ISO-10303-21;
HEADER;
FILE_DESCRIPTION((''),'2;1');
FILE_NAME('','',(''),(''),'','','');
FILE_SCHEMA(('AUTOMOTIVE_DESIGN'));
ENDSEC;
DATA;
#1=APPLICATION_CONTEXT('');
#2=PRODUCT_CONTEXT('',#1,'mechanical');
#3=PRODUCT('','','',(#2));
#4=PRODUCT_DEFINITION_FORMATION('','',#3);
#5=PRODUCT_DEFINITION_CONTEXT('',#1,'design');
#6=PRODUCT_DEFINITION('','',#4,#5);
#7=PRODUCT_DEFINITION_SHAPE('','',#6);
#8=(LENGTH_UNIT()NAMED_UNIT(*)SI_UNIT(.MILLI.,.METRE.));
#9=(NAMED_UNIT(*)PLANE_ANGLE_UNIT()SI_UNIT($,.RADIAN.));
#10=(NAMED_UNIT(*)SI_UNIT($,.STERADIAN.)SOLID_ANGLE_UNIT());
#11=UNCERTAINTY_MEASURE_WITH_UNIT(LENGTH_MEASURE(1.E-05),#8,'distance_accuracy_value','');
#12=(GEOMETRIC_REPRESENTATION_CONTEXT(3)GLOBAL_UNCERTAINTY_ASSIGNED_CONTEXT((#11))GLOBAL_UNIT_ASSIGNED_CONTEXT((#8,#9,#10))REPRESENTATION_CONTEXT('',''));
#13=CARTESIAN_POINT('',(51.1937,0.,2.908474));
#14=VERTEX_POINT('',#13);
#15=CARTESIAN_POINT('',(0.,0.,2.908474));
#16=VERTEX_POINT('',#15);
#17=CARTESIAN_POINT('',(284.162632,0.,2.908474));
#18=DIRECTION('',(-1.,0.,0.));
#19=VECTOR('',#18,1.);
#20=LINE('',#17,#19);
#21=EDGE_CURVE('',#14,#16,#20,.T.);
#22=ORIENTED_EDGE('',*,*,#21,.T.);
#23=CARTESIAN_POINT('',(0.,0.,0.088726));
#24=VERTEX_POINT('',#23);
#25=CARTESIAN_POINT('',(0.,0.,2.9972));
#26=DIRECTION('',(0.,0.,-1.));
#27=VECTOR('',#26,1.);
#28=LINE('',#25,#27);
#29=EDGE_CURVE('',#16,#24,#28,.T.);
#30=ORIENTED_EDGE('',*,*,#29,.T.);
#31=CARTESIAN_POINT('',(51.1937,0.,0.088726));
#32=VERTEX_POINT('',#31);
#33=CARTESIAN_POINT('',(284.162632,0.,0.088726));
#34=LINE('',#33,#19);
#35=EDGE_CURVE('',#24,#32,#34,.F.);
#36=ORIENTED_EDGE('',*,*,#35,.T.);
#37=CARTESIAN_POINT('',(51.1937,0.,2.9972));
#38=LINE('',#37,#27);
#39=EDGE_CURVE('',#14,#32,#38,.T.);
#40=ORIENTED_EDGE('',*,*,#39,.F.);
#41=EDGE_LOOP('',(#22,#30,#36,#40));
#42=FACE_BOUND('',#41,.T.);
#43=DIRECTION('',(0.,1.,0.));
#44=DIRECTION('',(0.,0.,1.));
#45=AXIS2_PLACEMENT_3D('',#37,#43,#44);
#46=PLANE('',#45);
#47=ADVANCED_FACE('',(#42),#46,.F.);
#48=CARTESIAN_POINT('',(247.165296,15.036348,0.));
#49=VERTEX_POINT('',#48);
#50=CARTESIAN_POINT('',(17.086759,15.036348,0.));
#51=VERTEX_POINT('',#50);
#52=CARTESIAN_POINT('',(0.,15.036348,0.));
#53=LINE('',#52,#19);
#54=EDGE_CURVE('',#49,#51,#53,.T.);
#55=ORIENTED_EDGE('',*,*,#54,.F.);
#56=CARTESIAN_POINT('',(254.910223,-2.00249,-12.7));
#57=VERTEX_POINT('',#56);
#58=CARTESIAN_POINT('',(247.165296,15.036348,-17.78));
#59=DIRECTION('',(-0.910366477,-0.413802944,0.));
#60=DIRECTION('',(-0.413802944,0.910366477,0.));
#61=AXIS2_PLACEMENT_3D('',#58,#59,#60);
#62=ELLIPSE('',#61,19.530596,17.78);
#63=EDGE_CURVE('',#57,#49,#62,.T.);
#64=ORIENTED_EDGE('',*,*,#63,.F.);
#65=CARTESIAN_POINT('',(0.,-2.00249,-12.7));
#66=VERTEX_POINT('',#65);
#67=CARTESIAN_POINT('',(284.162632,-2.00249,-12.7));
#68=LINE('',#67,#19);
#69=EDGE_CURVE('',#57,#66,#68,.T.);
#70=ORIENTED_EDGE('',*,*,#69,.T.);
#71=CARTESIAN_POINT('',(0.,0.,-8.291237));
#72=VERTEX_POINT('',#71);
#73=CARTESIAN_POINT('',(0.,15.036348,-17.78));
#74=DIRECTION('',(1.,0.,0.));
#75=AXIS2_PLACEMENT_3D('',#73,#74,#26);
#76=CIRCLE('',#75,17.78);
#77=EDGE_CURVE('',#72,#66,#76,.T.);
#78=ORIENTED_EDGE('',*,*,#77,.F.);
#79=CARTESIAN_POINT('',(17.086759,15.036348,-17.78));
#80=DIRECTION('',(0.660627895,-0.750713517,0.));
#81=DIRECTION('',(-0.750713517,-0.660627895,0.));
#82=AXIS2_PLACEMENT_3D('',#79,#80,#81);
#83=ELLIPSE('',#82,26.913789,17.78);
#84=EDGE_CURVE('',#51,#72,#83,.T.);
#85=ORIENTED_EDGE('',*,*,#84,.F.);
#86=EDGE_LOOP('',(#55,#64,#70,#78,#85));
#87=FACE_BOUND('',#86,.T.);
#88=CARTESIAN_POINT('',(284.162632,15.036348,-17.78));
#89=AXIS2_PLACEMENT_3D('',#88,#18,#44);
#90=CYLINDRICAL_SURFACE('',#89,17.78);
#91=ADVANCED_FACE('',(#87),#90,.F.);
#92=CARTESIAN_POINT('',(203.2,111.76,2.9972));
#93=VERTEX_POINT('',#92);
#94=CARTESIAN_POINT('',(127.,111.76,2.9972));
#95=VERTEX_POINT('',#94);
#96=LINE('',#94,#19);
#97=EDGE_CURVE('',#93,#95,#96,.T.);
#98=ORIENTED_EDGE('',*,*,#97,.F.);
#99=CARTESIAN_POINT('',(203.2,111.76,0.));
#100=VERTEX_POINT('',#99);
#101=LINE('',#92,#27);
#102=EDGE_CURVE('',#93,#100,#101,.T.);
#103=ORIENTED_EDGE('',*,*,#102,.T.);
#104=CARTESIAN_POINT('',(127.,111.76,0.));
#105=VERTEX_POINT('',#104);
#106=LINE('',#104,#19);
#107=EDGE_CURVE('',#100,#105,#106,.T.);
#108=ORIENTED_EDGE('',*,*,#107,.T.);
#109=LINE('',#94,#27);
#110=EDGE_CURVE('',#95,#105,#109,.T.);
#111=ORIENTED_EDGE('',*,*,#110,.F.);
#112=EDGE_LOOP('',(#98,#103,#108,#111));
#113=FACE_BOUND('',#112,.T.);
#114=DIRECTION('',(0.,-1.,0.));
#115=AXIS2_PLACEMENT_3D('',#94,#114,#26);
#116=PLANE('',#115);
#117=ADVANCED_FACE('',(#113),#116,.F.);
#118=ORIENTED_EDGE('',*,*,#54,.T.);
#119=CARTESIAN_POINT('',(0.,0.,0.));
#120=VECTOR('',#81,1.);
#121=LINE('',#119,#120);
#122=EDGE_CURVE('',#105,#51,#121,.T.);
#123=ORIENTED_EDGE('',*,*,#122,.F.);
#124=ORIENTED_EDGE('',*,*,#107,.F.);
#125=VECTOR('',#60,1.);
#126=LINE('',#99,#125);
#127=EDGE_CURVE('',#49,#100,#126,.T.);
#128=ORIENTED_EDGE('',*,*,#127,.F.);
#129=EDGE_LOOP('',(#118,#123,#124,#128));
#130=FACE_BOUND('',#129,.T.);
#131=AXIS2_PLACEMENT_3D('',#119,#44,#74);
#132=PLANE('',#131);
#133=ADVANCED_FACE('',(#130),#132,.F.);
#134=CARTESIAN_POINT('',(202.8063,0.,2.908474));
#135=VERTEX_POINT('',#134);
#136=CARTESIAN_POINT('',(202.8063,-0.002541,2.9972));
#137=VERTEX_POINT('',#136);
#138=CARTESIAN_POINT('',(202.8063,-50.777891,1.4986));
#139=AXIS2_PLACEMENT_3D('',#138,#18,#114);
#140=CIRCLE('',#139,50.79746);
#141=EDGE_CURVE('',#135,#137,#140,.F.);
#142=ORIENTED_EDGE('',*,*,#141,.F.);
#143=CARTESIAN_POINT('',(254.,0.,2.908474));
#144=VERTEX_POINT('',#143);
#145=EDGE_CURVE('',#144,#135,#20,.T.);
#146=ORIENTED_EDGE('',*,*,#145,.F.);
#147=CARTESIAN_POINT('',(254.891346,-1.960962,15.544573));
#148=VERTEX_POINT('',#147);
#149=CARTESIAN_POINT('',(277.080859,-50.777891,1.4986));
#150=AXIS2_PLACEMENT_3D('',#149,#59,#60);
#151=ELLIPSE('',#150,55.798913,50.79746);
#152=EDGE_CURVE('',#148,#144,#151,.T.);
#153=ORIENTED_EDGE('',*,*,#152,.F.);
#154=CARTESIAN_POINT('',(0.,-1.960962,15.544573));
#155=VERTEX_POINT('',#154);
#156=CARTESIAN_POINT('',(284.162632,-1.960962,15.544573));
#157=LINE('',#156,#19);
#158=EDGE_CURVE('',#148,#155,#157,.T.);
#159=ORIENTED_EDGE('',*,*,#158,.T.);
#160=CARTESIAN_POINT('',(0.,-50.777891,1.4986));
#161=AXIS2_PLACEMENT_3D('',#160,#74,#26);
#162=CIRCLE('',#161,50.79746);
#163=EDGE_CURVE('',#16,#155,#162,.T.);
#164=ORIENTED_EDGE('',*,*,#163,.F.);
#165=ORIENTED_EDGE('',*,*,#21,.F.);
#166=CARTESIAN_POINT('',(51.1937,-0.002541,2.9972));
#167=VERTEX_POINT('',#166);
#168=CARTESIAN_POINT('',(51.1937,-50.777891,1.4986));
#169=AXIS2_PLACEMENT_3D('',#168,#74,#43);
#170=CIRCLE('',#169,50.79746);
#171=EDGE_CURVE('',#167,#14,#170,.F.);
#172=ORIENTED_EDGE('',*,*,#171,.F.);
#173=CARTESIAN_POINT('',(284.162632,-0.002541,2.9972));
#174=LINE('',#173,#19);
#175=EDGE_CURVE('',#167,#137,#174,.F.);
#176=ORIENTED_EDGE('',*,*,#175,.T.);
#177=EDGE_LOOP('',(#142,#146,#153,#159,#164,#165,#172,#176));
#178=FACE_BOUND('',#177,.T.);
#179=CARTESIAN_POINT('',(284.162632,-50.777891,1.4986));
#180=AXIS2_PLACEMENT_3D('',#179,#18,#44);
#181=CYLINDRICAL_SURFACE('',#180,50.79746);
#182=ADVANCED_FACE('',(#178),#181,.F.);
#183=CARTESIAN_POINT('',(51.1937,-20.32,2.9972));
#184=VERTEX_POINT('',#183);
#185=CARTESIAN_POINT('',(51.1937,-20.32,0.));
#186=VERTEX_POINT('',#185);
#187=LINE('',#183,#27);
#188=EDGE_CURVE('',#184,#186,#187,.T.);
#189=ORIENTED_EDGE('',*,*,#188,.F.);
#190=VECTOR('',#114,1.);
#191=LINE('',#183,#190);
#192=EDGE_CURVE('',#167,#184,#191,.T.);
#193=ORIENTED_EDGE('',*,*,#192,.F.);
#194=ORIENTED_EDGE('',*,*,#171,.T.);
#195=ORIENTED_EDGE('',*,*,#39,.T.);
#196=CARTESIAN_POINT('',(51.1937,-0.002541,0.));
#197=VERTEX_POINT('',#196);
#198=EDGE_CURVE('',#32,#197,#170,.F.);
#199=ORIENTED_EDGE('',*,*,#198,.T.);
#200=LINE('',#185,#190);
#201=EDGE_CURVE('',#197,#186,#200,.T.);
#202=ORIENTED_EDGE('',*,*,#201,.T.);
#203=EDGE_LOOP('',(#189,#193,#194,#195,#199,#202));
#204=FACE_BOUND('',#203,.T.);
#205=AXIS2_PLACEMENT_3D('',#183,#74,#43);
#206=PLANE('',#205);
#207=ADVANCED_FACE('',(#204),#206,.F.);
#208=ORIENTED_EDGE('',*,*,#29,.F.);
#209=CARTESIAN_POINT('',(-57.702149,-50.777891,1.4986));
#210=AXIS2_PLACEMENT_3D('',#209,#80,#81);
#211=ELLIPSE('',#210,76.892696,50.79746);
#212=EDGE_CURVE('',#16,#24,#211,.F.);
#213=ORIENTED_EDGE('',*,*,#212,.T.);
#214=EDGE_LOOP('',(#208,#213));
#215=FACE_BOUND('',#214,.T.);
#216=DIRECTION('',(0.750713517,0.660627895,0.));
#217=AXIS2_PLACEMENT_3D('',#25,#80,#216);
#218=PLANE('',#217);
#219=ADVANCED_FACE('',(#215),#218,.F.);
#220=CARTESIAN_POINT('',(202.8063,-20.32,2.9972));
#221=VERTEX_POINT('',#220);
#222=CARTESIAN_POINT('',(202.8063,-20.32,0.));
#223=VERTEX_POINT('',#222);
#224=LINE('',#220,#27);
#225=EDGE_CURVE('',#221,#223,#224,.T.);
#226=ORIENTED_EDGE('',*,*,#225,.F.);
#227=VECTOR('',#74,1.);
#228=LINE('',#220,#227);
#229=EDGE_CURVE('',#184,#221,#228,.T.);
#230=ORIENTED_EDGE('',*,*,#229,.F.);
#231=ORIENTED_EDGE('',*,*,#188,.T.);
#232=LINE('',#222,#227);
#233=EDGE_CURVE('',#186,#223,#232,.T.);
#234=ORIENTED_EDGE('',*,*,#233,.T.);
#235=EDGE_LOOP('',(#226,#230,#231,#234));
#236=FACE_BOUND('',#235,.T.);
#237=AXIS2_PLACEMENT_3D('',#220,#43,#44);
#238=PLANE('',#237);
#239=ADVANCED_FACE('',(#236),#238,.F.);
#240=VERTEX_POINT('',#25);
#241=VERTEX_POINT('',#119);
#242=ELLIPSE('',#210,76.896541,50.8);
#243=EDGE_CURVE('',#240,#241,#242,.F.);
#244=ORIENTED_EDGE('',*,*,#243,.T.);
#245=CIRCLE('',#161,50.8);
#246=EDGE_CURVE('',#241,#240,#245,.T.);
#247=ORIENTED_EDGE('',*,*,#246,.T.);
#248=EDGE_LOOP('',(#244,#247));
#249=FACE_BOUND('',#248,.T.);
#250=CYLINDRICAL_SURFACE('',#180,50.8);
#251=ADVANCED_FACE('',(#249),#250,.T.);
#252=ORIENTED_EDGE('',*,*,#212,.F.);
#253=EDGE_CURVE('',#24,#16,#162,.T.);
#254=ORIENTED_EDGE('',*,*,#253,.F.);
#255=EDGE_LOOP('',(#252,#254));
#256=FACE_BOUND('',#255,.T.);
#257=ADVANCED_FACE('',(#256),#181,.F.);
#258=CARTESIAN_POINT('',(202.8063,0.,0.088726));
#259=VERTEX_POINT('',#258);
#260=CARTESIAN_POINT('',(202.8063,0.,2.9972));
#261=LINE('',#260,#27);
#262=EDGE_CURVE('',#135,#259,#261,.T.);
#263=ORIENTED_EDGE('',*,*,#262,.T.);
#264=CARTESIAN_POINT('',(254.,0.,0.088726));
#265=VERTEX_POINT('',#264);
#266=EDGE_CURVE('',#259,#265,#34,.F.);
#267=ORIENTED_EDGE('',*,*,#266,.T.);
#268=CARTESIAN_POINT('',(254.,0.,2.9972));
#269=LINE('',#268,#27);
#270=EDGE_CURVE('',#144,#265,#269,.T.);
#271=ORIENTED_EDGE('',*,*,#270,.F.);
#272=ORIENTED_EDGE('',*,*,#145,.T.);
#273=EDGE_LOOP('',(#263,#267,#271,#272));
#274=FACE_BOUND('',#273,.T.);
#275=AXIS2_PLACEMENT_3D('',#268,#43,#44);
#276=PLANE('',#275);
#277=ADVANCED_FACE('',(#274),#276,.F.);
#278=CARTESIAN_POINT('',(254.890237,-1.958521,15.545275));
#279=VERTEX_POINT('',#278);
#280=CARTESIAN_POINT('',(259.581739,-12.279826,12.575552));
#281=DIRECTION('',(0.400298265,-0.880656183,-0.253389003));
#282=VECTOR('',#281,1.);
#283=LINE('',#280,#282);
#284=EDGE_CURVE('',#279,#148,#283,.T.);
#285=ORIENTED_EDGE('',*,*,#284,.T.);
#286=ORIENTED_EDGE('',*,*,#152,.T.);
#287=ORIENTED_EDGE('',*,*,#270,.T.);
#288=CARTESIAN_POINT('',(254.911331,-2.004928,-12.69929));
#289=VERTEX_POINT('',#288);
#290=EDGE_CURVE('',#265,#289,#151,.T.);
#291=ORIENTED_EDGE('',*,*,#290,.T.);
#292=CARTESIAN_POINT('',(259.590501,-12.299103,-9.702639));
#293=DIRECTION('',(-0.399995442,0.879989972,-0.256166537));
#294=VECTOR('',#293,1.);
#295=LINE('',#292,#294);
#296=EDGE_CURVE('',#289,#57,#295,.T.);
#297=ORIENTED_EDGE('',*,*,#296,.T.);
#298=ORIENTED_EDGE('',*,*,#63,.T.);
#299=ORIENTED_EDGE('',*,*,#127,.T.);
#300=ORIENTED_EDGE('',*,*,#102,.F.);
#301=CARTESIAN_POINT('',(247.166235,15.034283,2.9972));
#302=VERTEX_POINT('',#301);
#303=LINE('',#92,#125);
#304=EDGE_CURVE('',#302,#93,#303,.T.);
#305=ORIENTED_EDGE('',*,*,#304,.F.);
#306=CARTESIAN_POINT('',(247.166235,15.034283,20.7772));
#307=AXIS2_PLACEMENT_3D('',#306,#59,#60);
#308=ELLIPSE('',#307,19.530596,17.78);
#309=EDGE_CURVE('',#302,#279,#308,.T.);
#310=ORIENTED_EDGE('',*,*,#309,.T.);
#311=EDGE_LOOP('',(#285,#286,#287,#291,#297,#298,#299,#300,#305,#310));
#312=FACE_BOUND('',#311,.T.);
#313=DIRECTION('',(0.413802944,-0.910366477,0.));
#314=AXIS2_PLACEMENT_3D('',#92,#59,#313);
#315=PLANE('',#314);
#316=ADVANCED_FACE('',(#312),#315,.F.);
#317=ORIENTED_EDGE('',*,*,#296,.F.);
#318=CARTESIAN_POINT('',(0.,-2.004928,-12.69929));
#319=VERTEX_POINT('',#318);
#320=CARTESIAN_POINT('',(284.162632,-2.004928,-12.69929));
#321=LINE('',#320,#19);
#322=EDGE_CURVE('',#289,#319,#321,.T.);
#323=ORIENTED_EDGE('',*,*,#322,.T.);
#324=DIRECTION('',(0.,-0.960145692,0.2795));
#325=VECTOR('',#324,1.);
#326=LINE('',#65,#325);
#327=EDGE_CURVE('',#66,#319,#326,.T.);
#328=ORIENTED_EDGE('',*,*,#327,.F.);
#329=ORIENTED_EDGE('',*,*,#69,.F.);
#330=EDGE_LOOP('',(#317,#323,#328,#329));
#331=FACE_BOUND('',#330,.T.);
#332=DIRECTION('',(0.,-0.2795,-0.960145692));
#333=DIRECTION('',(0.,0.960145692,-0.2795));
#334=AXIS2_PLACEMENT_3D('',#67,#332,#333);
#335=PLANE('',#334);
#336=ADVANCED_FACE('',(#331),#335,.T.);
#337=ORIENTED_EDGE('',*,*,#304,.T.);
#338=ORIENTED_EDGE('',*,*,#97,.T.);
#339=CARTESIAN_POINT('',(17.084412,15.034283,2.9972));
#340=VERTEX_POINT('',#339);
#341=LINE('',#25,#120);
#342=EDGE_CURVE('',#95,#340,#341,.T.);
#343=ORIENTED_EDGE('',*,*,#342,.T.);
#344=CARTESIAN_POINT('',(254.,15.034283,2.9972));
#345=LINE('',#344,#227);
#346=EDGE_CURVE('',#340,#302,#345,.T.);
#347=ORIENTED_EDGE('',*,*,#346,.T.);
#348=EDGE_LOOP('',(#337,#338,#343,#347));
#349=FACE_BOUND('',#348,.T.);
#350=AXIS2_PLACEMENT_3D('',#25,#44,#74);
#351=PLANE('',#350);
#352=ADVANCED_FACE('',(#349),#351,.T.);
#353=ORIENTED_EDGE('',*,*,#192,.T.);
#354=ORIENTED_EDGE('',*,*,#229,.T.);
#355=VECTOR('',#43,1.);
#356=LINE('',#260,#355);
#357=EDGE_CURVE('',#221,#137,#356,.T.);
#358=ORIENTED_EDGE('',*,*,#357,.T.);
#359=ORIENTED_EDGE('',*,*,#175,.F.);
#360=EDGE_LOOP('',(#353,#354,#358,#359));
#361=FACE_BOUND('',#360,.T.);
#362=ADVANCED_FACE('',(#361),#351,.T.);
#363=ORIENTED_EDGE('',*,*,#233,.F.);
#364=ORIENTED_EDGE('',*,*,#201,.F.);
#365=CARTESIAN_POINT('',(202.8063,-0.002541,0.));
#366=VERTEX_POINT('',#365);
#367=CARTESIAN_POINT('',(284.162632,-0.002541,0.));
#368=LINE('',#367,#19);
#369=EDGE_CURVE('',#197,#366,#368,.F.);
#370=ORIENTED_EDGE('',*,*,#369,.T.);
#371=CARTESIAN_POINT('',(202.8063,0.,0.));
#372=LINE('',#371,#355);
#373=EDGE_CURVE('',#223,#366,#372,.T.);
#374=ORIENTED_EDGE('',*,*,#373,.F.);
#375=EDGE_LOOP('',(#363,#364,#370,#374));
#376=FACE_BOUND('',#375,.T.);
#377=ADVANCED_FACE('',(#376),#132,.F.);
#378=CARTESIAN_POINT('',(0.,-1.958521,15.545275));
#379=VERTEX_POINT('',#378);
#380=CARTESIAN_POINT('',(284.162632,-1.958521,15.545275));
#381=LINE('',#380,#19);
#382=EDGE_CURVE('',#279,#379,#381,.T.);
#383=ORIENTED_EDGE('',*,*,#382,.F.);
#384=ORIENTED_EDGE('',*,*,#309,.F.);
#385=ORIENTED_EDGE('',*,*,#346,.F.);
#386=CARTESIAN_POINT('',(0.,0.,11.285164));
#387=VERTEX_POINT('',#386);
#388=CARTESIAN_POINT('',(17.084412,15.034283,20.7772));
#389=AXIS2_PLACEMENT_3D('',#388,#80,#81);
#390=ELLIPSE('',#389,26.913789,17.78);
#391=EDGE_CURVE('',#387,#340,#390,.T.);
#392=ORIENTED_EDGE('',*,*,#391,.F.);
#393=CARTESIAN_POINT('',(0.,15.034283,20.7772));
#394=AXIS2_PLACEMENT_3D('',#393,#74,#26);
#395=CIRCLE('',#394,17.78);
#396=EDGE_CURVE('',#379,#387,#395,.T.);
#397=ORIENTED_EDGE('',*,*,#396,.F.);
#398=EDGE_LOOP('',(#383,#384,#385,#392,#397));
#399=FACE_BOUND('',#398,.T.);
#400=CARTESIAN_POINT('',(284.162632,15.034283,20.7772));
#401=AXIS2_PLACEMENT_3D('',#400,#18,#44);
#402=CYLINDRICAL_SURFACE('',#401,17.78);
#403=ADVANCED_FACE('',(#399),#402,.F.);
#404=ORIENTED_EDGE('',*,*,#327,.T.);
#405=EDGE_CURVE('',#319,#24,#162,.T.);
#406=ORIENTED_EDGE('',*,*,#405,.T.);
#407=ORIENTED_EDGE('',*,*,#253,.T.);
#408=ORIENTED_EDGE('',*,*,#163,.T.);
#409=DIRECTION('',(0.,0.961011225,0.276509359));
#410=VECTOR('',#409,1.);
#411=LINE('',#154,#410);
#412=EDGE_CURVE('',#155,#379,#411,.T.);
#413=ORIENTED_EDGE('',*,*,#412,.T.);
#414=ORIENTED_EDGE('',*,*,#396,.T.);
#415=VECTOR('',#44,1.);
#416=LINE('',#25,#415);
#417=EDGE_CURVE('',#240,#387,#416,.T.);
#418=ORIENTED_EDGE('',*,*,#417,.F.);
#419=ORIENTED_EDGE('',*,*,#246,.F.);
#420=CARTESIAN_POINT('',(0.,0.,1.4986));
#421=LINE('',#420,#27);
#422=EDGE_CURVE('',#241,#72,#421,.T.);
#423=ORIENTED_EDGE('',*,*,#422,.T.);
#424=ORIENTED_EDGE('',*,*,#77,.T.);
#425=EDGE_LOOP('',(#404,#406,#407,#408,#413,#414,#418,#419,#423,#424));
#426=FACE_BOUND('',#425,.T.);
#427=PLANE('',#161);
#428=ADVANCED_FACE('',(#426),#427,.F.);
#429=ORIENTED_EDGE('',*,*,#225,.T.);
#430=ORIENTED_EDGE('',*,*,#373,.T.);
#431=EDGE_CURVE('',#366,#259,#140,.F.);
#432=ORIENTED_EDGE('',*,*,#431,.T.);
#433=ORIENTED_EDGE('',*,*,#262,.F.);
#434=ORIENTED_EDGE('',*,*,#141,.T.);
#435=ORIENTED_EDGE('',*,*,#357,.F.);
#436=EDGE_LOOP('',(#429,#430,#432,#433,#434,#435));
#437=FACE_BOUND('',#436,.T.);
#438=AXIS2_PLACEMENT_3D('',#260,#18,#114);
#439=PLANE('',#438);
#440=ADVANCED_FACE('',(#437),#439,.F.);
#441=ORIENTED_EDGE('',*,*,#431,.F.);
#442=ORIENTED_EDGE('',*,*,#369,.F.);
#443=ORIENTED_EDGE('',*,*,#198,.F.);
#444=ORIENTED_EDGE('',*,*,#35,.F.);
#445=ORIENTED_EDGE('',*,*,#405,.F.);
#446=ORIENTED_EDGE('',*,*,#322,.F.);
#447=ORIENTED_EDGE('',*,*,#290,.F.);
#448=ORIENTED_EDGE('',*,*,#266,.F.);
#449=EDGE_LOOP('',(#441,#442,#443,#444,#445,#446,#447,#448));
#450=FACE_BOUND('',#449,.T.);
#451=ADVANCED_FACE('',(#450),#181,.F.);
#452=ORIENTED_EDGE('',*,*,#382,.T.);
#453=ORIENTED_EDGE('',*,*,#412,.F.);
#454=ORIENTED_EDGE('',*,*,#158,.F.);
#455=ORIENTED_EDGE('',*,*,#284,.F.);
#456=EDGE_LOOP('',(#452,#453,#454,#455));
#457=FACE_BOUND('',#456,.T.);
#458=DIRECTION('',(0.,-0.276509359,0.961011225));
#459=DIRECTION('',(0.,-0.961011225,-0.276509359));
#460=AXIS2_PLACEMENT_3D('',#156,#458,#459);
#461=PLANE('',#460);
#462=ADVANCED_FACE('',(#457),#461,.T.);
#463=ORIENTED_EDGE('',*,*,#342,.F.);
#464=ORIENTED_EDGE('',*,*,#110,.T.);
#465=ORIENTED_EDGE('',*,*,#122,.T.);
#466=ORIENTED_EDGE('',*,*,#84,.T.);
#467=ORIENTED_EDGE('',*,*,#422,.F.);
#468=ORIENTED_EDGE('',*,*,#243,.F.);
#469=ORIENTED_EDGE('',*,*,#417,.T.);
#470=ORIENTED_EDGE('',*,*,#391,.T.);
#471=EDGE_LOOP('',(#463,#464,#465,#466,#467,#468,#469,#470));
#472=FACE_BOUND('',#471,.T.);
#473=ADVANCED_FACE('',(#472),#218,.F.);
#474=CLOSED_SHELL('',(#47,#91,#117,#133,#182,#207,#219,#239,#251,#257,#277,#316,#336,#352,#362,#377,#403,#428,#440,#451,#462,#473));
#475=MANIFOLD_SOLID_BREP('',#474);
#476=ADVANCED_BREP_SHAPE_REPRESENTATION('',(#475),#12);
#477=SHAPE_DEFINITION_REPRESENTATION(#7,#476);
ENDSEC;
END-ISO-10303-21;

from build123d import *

# Parameters (mm, degrees)
BOSS_EXTRUDE1_DEPTH = 2.9972
EXTRUDE_THIN1_REACH = 279.516
FILLET1_R           = 17.78


with BuildPart() as part:
    # Sketch1 → Boss-Extrude1 (new body)
    with BuildSketch(Plane.XY):
        Polygon((0, 0), (127, 111.76), (203.2, 111.76), (254, 0), (202.8063, 0), (202.8063, -20.32), (51.1937, -20.32), (51.1937, 0), align=None)
    extrude(amount=BOSS_EXTRUDE1_DEPTH)

    # Extrude-Thin1: up to this plane
    extrude_thin1_end = Plane(origin=(203.2, 111.76, 2.9972), z_dir=(-0.9103664774625979, -0.41380294430119924, 0))
    # Sketch2 → Extrude-Thin1 (add, up to the surface)
    with BuildSketch(Plane(origin=(0, 0, 0), x_dir=(0, 0, -1), z_dir=(1, 0, 0)), mode=Mode.PRIVATE) as extrude_thin1_sk1:
        with BuildLine():
            ThreePointArc((12.7, -2.002489682), (-1.419520366, 0.02204761), (-15.545275431, -1.958520612))
            Line((-15.545275431, -1.958520612), (-15.544573097, -1.96096158))
            ThreePointArc((-15.544573097, -1.96096158), (-1.41952432, 0.019507613), (12.69929007, -2.004928452))
            Line((12.69929007, -2.004928452), (12.7, -2.002489682))
        make_face()
    extrude_thin1_tool1 = split(extrude(extrude_thin1_sk1.sketch, amount=EXTRUDE_THIN1_REACH, mode=Mode.PRIVATE), bisect_by=extrude_thin1_end, keep=Keep.BOTH, mode=Mode.PRIVATE)
    add(extrude_thin1_tool1.solids().sort_by_distance((0, -1.92456, -12.427752))[0])

    # Fillet1
    # the kernel refuses this fillet: 17.78 mm, written as the material it adds along each edge
    with BuildSketch(Plane(origin=(0, 0, 0), x_dir=(0, 1, 0), z_dir=(1, 0, 0))) as fillet1_piece_1_section:
        with BuildLine():
            CenterArc((15.036348307, -17.78), FILLET1_R, 90, 73.398450401)
            ThreePointArc((-2.002489682, -12.7), (-0.597845135, -6.413606594), (0, 0))
            Line((0, 0), (15.036348307, 0))
        make_face()
    fillet1_piece_1 = extrude(amount=291.590870767, mode=Mode.PRIVATE)
    fillet1_piece_1 = split(fillet1_piece_1, bisect_by=Plane(origin=(74.006923082, 65.126092312, -3.495773927), z_dir=(0.6606278948920264, -0.750713516922754, 0)), keep=Keep.TOP, mode=Mode.PRIVATE)
    fillet1_piece_1 = split(fillet1_piece_1, bisect_by=Plane(origin=(230.677770328, 51.308905278, -3.495773927), z_dir=(-0.9103664774625979, -0.41380294430119924, 0)), keep=Keep.TOP, mode=Mode.PRIVATE)
    add(fillet1_piece_1)
    with BuildSketch(Plane(origin=(291.585706816, 0, 2.9972), x_dir=(0, -0.15421422141514082, 0.9880374354817341), z_dir=(-1, 0, 0))) as fillet1_piece_2_section:
        with BuildLine():
            CenterArc((15.248805398, 17.596363006), FILLET1_R, 188.871226526, 72.886892423)
            Line((-2.318500205, 14.854434149), (0, 0))
            ThreePointArc((0, 0), (6.35, 0.398437524), (12.7, 0))
        make_face()
    fillet1_piece_2 = extrude(amount=291.585706816, mode=Mode.PRIVATE)
    fillet1_piece_2 = split(fillet1_piece_2, bisect_by=Plane(origin=(74.031944404, 65.148111076, 6.44558698), z_dir=(0.6606278948920264, -0.750713516922754, 0)), keep=Keep.TOP, mode=Mode.PRIVATE)
    fillet1_piece_2 = split(fillet1_piece_2, bisect_by=Plane(origin=(230.652775468, 51.36389397, 6.44558698), z_dir=(-0.9103664774625979, -0.41380294430119924, 0)), keep=Keep.TOP, mode=Mode.PRIVATE)
    add(fillet1_piece_2)


solid = part.part
